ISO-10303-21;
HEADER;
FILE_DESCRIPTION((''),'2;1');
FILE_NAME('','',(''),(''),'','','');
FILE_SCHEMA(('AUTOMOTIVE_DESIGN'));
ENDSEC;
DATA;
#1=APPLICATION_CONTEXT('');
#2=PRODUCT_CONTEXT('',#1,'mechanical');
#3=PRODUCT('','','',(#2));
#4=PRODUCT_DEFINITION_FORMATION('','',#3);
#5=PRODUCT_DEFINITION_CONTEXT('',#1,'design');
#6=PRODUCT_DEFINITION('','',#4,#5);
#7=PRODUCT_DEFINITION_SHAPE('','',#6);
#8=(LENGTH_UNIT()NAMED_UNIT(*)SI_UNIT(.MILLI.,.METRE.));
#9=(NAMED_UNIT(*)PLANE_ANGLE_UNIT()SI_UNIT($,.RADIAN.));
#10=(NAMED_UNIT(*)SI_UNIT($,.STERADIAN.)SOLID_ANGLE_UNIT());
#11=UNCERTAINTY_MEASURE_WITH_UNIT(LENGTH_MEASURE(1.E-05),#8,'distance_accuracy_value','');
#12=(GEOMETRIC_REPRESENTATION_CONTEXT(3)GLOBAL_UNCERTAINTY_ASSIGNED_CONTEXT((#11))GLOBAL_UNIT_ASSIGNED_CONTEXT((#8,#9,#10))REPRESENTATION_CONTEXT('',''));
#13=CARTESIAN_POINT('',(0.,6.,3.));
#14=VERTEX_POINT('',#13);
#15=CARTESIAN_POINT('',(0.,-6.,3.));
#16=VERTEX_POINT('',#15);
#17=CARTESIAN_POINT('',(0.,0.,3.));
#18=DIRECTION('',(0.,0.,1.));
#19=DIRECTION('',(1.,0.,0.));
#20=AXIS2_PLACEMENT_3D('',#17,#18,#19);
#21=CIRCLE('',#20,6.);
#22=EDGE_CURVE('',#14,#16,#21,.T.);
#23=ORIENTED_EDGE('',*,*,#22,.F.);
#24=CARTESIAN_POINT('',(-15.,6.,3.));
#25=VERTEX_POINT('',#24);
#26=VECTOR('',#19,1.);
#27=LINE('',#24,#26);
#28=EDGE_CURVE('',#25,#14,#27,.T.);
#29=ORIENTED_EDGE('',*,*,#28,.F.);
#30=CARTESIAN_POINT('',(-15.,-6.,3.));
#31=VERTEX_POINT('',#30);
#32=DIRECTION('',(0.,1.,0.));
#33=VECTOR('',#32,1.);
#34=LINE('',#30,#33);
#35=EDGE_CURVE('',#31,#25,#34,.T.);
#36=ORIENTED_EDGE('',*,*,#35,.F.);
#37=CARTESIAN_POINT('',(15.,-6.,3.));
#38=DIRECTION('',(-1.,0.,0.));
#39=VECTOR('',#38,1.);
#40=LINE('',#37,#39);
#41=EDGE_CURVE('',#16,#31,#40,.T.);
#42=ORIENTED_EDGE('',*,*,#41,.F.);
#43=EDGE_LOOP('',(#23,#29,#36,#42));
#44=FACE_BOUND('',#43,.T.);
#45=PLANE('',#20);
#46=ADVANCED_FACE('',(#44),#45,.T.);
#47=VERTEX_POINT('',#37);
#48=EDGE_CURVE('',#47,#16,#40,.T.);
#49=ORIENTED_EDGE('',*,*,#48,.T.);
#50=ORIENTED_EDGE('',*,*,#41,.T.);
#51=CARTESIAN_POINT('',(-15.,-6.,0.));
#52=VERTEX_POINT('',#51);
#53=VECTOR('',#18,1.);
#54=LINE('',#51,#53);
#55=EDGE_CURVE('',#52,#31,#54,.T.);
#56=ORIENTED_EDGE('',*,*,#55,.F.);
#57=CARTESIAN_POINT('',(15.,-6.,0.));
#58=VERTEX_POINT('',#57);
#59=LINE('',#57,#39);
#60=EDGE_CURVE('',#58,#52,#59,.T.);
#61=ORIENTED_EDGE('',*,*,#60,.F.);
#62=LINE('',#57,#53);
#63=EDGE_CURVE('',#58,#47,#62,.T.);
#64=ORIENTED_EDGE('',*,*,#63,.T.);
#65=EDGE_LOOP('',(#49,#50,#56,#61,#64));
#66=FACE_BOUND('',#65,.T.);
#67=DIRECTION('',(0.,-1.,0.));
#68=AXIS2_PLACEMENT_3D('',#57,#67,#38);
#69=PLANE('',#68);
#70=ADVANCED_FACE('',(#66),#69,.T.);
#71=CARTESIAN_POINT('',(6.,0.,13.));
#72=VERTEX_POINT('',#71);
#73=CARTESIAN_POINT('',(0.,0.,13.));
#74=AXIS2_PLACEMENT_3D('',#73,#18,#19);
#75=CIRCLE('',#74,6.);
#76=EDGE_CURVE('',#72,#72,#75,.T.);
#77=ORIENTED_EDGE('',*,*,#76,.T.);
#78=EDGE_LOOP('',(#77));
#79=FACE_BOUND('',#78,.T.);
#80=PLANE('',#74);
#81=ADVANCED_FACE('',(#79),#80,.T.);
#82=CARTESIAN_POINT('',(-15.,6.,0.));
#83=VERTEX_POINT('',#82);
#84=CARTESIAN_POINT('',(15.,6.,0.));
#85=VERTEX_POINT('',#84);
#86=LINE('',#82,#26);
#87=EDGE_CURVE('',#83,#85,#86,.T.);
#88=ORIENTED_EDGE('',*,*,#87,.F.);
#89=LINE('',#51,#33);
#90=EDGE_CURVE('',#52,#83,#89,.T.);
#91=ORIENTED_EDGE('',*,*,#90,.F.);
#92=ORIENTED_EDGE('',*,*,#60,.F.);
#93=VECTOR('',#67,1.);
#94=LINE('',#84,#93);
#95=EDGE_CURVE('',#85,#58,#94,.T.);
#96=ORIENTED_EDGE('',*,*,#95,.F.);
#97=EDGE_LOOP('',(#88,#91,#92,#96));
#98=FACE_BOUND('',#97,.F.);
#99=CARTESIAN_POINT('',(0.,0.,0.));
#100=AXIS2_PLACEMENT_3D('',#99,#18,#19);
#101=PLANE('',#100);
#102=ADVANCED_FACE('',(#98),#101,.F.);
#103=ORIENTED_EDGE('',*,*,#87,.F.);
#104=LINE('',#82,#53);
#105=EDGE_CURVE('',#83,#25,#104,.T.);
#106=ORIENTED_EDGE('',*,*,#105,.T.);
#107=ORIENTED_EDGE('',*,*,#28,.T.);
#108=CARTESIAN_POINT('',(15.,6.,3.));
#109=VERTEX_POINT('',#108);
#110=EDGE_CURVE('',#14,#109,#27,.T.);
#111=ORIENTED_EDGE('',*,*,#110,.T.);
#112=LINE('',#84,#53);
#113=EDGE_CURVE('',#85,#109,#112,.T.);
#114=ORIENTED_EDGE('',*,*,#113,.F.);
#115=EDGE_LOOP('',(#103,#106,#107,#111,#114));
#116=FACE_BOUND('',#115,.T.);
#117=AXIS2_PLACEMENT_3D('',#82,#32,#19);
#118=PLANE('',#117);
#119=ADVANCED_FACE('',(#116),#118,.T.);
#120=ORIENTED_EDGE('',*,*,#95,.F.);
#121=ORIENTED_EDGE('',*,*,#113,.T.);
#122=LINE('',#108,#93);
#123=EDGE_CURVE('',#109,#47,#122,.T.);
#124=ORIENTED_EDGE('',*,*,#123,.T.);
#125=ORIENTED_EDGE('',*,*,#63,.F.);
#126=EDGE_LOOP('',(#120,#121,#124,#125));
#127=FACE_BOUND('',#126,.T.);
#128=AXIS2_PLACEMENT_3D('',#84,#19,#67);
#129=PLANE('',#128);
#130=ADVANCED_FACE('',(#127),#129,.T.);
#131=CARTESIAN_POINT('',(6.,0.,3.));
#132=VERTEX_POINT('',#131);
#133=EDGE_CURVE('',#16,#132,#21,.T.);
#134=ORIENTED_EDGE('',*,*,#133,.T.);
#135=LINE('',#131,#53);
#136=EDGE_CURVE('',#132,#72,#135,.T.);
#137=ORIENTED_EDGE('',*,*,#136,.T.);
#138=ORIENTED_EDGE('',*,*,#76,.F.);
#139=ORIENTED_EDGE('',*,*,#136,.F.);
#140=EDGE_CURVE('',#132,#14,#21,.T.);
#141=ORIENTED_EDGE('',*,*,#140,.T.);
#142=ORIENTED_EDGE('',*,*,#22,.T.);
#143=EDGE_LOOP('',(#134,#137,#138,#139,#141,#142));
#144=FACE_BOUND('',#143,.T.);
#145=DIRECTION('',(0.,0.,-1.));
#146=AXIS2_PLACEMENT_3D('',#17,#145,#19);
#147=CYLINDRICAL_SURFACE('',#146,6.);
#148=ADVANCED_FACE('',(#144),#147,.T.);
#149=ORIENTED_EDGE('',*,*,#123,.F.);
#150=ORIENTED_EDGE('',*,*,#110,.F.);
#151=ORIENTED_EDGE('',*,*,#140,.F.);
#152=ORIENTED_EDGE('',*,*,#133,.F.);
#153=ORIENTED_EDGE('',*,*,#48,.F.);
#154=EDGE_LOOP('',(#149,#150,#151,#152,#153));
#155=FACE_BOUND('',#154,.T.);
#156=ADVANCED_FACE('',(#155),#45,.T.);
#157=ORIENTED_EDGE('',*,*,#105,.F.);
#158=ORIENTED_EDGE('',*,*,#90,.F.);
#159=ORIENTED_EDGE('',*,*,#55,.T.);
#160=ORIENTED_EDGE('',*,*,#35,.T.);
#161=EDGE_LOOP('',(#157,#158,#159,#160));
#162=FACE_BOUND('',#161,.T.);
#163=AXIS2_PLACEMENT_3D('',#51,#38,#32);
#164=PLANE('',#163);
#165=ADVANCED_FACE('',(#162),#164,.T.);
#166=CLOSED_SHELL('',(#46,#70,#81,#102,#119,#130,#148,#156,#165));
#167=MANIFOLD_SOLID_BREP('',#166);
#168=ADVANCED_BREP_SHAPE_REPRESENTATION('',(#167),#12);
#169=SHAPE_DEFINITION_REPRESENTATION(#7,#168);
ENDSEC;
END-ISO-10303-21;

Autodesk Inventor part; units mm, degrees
ref_plane "YZ Plane" through (0, 0, 0) normal (1, 0, 0) x (0, 1, 0)
ref_plane "XZ Plane" through (0, 0, 0) normal (0, 1, 0) x (-1, 0, 0)
ref_plane "XY Plane" through (0, 0, 0) normal (0, 0, 1) x (1, 0, 0)
sketch "Sketch1" plane through (0, 0, 0) normal (0, 0, 1) x (1, 0, 0)
  line L0 (-15, 6) -> (15, 6)
  line L1 (15, 6) -> (15, -6)
  line L2 (15, -6) -> (-15, -6)
  line L3 (-15, -6) -> (-15, 6)
  line L4 (-15, 6) -> (15, -6) construction
  line L5 (15, 6) -> (-15, -6) construction
  point P0 (0, 0)
  dimension "d0" = 30
  dimension "d1" = 12
extrude "Extrusion1" add sketch "Sketch1" along normal blind 3
sketch "Sketch2" plane through (0, 0, 3) normal (0, 0, 1) x (1, 0, 0)
  circle A0 centre (0, 0) radius 6
  dimension "d4" = 12
extrude "Extrusion2" add sketch "Sketch2" along normal blind 10
thread "Thread2" size "M12x1.75" class "6g" standard "ANSI Metric M Profile" length 5
properties part number "BOTTOM STOPPER" material "Steel, Alloy"
